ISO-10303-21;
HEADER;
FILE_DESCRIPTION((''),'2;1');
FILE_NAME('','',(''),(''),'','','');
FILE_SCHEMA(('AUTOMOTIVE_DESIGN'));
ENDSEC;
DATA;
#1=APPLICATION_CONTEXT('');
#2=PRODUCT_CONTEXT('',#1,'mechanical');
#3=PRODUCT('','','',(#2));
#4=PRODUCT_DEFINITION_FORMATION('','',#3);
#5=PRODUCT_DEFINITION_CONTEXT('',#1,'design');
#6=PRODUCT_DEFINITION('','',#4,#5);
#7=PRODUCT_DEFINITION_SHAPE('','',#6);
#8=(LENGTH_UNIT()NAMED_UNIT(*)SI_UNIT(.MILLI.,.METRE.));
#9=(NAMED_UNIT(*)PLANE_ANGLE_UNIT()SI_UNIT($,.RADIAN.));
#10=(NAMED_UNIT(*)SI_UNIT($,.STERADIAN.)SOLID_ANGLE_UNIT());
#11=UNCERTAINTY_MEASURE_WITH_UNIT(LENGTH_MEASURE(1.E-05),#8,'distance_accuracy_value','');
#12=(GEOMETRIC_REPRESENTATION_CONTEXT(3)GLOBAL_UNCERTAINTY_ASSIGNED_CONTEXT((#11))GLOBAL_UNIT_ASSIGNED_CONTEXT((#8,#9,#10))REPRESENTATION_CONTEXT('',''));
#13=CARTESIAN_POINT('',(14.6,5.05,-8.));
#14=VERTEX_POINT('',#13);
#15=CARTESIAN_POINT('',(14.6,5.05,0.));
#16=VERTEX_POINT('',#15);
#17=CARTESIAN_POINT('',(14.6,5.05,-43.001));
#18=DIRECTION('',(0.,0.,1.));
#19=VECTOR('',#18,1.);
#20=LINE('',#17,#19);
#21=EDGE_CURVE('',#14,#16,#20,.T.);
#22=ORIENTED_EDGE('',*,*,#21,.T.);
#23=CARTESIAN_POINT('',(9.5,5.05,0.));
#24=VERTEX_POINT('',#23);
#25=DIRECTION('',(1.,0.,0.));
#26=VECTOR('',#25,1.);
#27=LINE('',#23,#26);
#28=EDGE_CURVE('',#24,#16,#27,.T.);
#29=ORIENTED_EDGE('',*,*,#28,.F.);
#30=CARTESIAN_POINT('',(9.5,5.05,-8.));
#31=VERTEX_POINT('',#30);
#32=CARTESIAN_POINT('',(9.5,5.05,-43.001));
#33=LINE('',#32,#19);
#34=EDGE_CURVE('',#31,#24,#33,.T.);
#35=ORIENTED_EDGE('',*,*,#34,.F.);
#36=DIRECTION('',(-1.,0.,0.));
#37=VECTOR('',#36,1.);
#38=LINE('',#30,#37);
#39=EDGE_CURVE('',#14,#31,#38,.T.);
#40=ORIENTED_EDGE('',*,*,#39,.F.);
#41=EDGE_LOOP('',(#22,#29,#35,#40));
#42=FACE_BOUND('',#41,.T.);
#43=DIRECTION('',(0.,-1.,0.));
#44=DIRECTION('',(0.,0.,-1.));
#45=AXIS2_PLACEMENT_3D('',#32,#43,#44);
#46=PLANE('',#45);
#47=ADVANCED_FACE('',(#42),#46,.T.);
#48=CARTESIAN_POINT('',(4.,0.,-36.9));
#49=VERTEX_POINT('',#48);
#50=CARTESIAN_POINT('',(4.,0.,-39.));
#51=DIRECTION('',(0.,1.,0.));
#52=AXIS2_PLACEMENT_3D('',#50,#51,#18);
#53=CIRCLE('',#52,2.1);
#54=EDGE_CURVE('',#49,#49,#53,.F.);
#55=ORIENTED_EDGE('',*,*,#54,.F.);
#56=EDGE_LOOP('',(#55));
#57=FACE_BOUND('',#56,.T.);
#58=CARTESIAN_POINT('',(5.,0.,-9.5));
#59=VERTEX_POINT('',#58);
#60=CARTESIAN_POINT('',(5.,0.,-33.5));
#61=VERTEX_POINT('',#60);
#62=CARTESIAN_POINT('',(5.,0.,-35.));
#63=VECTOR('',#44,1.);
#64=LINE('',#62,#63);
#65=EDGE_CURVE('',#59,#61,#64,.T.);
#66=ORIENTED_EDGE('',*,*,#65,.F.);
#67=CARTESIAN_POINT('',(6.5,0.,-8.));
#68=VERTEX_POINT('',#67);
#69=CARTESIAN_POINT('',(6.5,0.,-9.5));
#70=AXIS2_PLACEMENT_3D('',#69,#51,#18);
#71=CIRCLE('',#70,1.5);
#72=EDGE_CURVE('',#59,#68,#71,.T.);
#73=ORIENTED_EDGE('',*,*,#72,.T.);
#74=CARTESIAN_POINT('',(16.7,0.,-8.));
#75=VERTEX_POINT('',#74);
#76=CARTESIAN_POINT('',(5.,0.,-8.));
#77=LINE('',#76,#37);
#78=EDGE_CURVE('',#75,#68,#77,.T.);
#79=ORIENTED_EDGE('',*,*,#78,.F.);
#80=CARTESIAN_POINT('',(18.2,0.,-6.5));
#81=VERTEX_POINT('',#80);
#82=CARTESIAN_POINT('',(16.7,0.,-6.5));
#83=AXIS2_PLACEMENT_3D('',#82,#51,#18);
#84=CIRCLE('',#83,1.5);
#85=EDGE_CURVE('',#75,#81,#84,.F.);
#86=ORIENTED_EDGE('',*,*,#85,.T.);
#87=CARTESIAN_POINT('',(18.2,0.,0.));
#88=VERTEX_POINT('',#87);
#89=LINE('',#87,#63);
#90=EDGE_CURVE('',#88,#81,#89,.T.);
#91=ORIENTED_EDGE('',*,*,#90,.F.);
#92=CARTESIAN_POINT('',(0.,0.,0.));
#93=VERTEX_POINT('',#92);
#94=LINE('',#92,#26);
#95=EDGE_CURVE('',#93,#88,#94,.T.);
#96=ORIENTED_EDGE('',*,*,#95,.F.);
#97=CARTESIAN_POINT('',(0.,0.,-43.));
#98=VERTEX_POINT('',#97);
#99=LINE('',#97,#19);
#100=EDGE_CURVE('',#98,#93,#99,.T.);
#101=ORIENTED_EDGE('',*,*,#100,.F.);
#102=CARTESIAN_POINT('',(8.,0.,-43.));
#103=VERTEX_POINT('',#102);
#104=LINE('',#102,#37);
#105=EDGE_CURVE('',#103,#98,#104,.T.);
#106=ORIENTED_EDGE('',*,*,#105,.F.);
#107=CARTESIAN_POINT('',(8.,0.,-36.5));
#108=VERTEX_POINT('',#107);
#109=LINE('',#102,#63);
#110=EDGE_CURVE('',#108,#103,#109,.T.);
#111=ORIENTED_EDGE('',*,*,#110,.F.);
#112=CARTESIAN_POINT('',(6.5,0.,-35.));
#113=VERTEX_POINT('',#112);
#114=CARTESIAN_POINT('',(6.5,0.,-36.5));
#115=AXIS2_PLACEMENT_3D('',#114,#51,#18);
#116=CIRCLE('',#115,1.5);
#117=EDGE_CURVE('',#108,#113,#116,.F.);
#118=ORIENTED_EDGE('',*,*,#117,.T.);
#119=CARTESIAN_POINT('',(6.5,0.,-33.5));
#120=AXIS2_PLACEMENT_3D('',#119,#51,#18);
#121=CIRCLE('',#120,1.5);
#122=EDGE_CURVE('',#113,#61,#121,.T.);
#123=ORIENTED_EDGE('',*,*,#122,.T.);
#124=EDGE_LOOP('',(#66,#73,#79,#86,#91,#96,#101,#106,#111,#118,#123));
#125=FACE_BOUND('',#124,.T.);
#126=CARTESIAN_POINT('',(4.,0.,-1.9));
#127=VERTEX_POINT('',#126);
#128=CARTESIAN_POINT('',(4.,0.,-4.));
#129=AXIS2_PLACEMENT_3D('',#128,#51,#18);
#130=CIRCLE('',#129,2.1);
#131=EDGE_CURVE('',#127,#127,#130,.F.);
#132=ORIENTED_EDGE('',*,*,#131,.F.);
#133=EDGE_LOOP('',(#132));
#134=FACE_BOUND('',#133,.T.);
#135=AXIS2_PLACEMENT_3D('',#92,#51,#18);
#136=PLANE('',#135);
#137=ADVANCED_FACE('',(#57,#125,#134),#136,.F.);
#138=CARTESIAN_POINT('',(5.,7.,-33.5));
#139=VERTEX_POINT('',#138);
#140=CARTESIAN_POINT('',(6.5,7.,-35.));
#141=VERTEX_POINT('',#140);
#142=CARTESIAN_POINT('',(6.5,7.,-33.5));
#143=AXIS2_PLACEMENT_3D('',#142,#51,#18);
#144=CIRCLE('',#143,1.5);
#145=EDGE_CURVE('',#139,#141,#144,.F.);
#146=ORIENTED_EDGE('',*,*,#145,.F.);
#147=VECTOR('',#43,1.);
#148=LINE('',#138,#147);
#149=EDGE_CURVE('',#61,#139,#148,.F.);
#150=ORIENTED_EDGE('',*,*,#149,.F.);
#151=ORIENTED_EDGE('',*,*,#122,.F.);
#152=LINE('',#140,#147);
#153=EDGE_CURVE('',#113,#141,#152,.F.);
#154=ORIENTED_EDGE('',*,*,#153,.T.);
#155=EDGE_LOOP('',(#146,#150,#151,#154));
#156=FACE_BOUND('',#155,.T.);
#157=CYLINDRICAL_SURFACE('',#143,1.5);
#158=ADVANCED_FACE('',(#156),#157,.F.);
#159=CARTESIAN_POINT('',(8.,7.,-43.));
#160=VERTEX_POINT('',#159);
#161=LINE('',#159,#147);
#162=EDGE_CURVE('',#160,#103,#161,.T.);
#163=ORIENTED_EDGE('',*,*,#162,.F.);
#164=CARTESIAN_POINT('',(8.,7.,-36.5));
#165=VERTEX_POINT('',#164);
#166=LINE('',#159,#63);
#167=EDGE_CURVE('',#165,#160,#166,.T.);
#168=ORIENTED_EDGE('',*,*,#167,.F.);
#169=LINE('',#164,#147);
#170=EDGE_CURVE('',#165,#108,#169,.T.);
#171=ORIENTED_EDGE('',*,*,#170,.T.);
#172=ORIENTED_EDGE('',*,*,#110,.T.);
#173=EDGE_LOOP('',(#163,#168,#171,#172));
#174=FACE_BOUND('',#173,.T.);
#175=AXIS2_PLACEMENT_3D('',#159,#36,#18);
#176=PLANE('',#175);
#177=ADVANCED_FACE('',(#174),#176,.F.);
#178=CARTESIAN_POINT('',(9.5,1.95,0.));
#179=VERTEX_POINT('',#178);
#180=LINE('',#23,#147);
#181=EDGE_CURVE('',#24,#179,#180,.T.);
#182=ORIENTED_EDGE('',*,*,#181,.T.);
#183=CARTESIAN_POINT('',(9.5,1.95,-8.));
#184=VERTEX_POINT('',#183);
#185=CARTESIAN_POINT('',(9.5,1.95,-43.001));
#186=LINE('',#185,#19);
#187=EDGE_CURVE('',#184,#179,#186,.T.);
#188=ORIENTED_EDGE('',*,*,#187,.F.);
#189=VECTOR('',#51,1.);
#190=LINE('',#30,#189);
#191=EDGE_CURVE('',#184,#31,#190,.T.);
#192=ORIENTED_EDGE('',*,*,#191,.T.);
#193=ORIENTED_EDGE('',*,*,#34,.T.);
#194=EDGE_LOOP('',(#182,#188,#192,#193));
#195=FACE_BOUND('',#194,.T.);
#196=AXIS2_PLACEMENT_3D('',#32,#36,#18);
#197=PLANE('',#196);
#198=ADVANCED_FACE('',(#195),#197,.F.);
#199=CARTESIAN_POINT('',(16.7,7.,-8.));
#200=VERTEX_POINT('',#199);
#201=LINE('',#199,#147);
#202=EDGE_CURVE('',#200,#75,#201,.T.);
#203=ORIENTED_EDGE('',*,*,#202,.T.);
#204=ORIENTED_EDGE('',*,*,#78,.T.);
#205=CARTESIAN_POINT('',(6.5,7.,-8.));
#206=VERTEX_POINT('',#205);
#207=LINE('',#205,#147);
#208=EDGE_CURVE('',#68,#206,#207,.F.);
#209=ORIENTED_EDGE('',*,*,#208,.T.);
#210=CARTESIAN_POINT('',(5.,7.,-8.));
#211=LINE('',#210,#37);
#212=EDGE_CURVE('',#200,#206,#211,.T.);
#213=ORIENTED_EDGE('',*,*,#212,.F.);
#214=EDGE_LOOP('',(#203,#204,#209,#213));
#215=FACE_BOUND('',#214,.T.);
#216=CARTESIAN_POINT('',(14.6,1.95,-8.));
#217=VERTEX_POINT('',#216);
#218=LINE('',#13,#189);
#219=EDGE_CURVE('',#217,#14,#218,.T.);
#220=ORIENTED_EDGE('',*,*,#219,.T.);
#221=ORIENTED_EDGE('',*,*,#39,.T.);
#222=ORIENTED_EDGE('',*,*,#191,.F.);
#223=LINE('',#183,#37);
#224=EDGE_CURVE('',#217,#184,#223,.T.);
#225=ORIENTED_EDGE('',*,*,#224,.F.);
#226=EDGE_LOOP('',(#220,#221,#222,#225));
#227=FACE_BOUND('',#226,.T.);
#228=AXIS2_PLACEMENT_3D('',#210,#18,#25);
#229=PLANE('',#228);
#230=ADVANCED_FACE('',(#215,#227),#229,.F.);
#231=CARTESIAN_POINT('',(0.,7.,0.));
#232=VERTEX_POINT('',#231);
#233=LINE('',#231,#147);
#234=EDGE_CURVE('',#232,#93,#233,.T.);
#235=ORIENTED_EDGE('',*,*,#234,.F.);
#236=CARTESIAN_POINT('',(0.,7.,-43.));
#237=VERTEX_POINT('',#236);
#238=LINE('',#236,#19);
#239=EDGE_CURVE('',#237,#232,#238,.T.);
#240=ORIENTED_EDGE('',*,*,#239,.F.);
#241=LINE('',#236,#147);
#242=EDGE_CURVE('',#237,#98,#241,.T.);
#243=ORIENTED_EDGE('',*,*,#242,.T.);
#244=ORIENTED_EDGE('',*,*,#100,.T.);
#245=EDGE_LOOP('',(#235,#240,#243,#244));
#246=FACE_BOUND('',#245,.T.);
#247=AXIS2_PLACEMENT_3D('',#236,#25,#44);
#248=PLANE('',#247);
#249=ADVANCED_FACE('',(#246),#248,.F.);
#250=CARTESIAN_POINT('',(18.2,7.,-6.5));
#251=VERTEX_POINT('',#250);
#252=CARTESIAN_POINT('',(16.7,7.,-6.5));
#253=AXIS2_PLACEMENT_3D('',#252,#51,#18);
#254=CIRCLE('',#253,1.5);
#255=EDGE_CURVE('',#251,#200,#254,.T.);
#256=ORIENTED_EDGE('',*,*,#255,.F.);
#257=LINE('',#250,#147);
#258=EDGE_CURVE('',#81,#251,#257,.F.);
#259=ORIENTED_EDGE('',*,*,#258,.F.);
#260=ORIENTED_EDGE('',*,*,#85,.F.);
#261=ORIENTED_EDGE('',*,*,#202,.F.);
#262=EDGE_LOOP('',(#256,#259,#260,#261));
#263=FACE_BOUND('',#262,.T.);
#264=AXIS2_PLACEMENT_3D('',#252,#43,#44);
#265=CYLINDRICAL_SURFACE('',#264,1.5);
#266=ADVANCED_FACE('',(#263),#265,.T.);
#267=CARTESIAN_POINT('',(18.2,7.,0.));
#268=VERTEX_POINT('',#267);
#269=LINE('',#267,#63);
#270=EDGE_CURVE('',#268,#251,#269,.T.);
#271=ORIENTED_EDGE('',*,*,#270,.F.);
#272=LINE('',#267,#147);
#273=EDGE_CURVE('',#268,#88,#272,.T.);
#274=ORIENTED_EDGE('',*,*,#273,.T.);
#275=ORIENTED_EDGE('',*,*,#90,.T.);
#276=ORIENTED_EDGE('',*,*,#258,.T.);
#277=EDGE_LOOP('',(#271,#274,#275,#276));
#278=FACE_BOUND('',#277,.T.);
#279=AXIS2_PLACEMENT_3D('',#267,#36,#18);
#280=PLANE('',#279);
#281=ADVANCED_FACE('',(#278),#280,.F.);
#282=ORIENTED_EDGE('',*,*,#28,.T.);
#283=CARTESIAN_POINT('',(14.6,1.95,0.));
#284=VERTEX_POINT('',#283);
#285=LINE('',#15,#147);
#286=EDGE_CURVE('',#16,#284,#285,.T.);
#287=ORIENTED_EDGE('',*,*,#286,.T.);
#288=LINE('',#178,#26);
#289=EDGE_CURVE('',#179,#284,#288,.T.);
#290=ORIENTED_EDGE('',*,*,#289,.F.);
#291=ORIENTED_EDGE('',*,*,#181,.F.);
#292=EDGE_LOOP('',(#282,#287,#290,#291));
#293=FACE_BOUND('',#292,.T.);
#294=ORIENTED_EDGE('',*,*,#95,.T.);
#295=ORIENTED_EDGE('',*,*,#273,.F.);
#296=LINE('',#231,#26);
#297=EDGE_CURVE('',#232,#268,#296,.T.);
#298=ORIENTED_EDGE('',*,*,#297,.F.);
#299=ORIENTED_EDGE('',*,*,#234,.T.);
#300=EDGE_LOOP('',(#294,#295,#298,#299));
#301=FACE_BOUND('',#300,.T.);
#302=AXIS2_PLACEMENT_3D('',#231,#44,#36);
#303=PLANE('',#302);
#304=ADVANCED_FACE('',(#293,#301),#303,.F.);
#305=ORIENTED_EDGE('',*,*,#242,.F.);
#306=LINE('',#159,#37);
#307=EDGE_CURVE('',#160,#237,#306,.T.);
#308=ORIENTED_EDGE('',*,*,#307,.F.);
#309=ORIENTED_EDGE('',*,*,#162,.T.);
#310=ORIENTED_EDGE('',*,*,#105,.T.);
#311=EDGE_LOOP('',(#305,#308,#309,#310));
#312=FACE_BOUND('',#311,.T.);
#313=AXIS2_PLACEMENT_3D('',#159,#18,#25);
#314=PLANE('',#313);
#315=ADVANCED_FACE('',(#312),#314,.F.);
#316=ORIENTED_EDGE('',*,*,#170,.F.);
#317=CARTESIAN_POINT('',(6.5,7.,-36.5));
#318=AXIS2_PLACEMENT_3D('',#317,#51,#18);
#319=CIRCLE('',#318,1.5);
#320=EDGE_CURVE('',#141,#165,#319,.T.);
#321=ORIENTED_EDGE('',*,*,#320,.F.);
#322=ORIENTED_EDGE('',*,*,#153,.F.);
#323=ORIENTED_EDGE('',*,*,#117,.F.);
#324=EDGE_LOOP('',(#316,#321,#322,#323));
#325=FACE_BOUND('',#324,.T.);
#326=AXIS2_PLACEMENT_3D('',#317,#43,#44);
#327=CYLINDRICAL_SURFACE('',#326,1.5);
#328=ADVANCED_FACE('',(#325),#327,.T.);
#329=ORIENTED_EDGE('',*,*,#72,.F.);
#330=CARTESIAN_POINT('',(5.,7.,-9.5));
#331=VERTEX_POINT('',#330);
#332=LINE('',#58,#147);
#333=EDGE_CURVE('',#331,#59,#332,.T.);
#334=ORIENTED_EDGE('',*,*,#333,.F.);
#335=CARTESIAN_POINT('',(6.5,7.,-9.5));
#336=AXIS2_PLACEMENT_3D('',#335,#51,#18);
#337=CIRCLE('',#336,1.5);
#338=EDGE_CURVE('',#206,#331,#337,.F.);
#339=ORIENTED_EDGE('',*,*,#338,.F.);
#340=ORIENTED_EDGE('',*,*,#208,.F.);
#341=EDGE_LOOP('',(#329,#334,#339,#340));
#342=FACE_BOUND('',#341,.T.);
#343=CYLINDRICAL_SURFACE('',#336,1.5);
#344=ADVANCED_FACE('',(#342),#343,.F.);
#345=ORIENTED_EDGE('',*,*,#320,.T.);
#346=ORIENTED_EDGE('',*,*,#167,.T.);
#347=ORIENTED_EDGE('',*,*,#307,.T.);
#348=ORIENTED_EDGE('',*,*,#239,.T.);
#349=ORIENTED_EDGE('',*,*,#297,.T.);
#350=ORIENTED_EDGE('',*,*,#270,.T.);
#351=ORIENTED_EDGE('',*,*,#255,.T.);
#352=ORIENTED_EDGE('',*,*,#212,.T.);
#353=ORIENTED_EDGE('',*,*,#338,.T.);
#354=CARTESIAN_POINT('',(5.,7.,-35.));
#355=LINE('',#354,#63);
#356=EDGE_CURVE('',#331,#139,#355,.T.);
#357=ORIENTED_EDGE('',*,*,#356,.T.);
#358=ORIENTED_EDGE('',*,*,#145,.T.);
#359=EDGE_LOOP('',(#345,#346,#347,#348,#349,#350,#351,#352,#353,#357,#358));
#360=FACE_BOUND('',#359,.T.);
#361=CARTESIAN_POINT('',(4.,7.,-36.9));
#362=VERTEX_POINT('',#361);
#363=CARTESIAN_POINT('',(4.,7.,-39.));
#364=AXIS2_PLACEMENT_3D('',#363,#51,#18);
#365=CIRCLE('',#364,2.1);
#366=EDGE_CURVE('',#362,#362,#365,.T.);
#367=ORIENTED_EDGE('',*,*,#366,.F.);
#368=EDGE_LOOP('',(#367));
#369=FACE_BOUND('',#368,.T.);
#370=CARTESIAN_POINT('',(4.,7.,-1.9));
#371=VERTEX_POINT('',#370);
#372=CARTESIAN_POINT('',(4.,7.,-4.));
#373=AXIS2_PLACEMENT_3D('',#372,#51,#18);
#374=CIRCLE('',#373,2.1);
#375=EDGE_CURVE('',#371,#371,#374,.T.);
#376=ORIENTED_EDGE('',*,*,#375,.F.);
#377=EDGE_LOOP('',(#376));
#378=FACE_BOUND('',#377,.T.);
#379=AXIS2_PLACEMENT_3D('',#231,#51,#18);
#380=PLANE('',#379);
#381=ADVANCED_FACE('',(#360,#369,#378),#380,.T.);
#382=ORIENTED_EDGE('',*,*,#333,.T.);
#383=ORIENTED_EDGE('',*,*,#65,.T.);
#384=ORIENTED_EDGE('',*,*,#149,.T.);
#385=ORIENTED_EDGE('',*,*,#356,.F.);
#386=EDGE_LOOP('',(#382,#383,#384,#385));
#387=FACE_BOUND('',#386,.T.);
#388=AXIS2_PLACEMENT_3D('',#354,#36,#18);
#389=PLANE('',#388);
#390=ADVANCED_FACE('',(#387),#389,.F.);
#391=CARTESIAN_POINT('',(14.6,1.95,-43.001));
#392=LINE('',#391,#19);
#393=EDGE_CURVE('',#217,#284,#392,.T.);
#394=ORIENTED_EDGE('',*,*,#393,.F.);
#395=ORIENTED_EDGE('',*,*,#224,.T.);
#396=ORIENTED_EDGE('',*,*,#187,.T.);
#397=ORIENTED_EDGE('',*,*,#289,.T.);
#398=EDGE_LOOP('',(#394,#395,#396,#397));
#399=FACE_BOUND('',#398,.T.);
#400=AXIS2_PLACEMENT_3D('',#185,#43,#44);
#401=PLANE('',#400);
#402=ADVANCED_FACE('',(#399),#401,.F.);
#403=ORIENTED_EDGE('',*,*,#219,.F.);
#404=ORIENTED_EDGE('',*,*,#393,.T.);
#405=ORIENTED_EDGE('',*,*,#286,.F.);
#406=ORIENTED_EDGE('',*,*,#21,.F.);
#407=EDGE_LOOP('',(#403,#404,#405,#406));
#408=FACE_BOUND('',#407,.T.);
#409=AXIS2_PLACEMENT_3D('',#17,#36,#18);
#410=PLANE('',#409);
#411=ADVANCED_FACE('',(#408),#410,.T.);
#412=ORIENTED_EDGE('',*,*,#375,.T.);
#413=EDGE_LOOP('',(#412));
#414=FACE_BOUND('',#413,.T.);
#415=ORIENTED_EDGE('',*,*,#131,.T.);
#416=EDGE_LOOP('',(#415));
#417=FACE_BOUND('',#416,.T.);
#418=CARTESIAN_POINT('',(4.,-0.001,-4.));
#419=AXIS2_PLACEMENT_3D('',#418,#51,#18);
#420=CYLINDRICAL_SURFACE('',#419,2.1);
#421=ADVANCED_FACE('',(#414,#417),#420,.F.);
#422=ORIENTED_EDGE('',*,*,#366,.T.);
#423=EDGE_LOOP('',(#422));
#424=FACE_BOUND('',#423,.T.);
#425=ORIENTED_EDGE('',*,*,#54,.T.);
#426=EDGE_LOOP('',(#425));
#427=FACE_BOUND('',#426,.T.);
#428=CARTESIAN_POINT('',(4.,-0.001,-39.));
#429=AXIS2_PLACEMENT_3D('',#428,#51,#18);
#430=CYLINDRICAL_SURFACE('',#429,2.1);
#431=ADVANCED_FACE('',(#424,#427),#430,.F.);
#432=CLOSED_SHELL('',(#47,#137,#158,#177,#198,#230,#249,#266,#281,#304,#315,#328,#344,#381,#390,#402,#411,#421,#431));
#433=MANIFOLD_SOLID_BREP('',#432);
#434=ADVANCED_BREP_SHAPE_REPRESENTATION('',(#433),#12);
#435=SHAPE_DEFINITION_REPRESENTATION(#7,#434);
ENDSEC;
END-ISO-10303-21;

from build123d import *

# Parameters (mm, degrees)
BOSS_EXTRUDE1_DEPTH = 7
CUT_EXTRUDE1_REACH  = 49.215
SKETCH2_W           = 5.1
SKETCH2_H           = 3.1
CUT_EXTRUDE2_REACH  = 49.215
SKETCH3_R           = 2.1
FILLET1_START       = -1
FILLET1_DEPTH       = 9
FILLET1_2_DEPTH     = 7


with BuildPart() as part:
    # Sketch1 → Boss-Extrude1 (new body)
    with BuildSketch(Plane(origin=(0, 0, 0), x_dir=(1, 0, 0), z_dir=(0, 1, 0))):
        Polygon((0, 0), (18.2, 0), (18.2, 8), (5, 8), (5, 35), (8, 35), (8, 43), (0, 43), align=None)
    extrude(amount=BOSS_EXTRUDE1_DEPTH)

    # Sketch2 → Cut-Extrude1 (cut, up to next)
    with BuildSketch(Plane.XY, mode=Mode.PRIVATE) as cut_extrude1_sk1:
        with Locations((12.05, 3.5)):
            Rectangle(SKETCH2_W, SKETCH2_H)
    cut_extrude1_tool1 = extrude(cut_extrude1_sk1.sketch, amount=-CUT_EXTRUDE1_REACH, mode=Mode.PRIVATE) & part.part
    add(cut_extrude1_tool1.solids().sort_by_distance((12.05, 3.5, 0))[0], mode=Mode.SUBTRACT)

    # Sketch3 → Cut-Extrude2 (cut, up to next)
    with BuildSketch(Plane(origin=(0, 7, 0), x_dir=(1, 0, 0), z_dir=(0, 1, 0)), mode=Mode.PRIVATE) as cut_extrude2_sk1:
        with Locations(Location((4, 39, 0), (0, 0, 270))):
            Circle(SKETCH3_R)
    cut_extrude2_tool1 = extrude(cut_extrude2_sk1.sketch, amount=-CUT_EXTRUDE2_REACH, mode=Mode.PRIVATE) & part.part
    # Sketch3 → Cut-Extrude2 (cut, up to next)
    with BuildSketch(Plane(origin=(0, 7, 0), x_dir=(1, 0, 0), z_dir=(0, 1, 0)), mode=Mode.PRIVATE) as cut_extrude2_sk2:
        with Locations(Location((4, 4, 0), (0, 0, 270))):
            Circle(SKETCH3_R)
    cut_extrude2_tool2 = extrude(cut_extrude2_sk2.sketch, amount=-CUT_EXTRUDE2_REACH, mode=Mode.PRIVATE) & part.part
    add(cut_extrude2_tool1.solids().sort_by_distance((4, 7, -39))[0], mode=Mode.SUBTRACT)
    add(cut_extrude2_tool2.solids().sort_by_distance((4, 7, -4))[0], mode=Mode.SUBTRACT)

    # Fillet1: read off the stored shape, not the designer's step
    # Fillet1 outline → Fillet1 (cut)
    with BuildSketch(Plane(origin=(0, 0, 0), x_dir=(1, 0, 0), z_dir=(0, 1, 0)).offset(FILLET1_START)):
        with BuildLine():
            Line((18.2, 8), (16.7, 8))
            ThreePointArc((16.7, 8), (17.760660172, 7.560660172), (18.2, 6.5))
            Line((18.2, 6.5), (18.2, 8))
        make_face()
        with BuildLine():
            ThreePointArc((8, 36.5), (7.560660172, 35.439339828), (6.5, 35))
            Line((6.5, 35), (8, 35))
            Line((8, 35), (8, 36.5))
        make_face()
    extrude(amount=FILLET1_DEPTH, mode=Mode.SUBTRACT)

    # Fillet1 2 outline → Fillet1 2 (add)
    with BuildSketch(Plane(origin=(0, 0, 0), x_dir=(1, 0, 0), z_dir=(0, 1, 0))):
        with BuildLine():
            Line((5, 35), (5, 33.5))
            ThreePointArc((5, 33.5), (5.439339828, 34.560660172), (6.5, 35))
            Line((6.5, 35), (5, 35))
        make_face()
        with BuildLine():
            Line((5, 8), (6.5, 8))
            ThreePointArc((6.5, 8), (5.439339828, 8.439339828), (5, 9.5))
            Line((5, 9.5), (5, 8))
        make_face()
    extrude(amount=FILLET1_2_DEPTH)


solid = part.part
